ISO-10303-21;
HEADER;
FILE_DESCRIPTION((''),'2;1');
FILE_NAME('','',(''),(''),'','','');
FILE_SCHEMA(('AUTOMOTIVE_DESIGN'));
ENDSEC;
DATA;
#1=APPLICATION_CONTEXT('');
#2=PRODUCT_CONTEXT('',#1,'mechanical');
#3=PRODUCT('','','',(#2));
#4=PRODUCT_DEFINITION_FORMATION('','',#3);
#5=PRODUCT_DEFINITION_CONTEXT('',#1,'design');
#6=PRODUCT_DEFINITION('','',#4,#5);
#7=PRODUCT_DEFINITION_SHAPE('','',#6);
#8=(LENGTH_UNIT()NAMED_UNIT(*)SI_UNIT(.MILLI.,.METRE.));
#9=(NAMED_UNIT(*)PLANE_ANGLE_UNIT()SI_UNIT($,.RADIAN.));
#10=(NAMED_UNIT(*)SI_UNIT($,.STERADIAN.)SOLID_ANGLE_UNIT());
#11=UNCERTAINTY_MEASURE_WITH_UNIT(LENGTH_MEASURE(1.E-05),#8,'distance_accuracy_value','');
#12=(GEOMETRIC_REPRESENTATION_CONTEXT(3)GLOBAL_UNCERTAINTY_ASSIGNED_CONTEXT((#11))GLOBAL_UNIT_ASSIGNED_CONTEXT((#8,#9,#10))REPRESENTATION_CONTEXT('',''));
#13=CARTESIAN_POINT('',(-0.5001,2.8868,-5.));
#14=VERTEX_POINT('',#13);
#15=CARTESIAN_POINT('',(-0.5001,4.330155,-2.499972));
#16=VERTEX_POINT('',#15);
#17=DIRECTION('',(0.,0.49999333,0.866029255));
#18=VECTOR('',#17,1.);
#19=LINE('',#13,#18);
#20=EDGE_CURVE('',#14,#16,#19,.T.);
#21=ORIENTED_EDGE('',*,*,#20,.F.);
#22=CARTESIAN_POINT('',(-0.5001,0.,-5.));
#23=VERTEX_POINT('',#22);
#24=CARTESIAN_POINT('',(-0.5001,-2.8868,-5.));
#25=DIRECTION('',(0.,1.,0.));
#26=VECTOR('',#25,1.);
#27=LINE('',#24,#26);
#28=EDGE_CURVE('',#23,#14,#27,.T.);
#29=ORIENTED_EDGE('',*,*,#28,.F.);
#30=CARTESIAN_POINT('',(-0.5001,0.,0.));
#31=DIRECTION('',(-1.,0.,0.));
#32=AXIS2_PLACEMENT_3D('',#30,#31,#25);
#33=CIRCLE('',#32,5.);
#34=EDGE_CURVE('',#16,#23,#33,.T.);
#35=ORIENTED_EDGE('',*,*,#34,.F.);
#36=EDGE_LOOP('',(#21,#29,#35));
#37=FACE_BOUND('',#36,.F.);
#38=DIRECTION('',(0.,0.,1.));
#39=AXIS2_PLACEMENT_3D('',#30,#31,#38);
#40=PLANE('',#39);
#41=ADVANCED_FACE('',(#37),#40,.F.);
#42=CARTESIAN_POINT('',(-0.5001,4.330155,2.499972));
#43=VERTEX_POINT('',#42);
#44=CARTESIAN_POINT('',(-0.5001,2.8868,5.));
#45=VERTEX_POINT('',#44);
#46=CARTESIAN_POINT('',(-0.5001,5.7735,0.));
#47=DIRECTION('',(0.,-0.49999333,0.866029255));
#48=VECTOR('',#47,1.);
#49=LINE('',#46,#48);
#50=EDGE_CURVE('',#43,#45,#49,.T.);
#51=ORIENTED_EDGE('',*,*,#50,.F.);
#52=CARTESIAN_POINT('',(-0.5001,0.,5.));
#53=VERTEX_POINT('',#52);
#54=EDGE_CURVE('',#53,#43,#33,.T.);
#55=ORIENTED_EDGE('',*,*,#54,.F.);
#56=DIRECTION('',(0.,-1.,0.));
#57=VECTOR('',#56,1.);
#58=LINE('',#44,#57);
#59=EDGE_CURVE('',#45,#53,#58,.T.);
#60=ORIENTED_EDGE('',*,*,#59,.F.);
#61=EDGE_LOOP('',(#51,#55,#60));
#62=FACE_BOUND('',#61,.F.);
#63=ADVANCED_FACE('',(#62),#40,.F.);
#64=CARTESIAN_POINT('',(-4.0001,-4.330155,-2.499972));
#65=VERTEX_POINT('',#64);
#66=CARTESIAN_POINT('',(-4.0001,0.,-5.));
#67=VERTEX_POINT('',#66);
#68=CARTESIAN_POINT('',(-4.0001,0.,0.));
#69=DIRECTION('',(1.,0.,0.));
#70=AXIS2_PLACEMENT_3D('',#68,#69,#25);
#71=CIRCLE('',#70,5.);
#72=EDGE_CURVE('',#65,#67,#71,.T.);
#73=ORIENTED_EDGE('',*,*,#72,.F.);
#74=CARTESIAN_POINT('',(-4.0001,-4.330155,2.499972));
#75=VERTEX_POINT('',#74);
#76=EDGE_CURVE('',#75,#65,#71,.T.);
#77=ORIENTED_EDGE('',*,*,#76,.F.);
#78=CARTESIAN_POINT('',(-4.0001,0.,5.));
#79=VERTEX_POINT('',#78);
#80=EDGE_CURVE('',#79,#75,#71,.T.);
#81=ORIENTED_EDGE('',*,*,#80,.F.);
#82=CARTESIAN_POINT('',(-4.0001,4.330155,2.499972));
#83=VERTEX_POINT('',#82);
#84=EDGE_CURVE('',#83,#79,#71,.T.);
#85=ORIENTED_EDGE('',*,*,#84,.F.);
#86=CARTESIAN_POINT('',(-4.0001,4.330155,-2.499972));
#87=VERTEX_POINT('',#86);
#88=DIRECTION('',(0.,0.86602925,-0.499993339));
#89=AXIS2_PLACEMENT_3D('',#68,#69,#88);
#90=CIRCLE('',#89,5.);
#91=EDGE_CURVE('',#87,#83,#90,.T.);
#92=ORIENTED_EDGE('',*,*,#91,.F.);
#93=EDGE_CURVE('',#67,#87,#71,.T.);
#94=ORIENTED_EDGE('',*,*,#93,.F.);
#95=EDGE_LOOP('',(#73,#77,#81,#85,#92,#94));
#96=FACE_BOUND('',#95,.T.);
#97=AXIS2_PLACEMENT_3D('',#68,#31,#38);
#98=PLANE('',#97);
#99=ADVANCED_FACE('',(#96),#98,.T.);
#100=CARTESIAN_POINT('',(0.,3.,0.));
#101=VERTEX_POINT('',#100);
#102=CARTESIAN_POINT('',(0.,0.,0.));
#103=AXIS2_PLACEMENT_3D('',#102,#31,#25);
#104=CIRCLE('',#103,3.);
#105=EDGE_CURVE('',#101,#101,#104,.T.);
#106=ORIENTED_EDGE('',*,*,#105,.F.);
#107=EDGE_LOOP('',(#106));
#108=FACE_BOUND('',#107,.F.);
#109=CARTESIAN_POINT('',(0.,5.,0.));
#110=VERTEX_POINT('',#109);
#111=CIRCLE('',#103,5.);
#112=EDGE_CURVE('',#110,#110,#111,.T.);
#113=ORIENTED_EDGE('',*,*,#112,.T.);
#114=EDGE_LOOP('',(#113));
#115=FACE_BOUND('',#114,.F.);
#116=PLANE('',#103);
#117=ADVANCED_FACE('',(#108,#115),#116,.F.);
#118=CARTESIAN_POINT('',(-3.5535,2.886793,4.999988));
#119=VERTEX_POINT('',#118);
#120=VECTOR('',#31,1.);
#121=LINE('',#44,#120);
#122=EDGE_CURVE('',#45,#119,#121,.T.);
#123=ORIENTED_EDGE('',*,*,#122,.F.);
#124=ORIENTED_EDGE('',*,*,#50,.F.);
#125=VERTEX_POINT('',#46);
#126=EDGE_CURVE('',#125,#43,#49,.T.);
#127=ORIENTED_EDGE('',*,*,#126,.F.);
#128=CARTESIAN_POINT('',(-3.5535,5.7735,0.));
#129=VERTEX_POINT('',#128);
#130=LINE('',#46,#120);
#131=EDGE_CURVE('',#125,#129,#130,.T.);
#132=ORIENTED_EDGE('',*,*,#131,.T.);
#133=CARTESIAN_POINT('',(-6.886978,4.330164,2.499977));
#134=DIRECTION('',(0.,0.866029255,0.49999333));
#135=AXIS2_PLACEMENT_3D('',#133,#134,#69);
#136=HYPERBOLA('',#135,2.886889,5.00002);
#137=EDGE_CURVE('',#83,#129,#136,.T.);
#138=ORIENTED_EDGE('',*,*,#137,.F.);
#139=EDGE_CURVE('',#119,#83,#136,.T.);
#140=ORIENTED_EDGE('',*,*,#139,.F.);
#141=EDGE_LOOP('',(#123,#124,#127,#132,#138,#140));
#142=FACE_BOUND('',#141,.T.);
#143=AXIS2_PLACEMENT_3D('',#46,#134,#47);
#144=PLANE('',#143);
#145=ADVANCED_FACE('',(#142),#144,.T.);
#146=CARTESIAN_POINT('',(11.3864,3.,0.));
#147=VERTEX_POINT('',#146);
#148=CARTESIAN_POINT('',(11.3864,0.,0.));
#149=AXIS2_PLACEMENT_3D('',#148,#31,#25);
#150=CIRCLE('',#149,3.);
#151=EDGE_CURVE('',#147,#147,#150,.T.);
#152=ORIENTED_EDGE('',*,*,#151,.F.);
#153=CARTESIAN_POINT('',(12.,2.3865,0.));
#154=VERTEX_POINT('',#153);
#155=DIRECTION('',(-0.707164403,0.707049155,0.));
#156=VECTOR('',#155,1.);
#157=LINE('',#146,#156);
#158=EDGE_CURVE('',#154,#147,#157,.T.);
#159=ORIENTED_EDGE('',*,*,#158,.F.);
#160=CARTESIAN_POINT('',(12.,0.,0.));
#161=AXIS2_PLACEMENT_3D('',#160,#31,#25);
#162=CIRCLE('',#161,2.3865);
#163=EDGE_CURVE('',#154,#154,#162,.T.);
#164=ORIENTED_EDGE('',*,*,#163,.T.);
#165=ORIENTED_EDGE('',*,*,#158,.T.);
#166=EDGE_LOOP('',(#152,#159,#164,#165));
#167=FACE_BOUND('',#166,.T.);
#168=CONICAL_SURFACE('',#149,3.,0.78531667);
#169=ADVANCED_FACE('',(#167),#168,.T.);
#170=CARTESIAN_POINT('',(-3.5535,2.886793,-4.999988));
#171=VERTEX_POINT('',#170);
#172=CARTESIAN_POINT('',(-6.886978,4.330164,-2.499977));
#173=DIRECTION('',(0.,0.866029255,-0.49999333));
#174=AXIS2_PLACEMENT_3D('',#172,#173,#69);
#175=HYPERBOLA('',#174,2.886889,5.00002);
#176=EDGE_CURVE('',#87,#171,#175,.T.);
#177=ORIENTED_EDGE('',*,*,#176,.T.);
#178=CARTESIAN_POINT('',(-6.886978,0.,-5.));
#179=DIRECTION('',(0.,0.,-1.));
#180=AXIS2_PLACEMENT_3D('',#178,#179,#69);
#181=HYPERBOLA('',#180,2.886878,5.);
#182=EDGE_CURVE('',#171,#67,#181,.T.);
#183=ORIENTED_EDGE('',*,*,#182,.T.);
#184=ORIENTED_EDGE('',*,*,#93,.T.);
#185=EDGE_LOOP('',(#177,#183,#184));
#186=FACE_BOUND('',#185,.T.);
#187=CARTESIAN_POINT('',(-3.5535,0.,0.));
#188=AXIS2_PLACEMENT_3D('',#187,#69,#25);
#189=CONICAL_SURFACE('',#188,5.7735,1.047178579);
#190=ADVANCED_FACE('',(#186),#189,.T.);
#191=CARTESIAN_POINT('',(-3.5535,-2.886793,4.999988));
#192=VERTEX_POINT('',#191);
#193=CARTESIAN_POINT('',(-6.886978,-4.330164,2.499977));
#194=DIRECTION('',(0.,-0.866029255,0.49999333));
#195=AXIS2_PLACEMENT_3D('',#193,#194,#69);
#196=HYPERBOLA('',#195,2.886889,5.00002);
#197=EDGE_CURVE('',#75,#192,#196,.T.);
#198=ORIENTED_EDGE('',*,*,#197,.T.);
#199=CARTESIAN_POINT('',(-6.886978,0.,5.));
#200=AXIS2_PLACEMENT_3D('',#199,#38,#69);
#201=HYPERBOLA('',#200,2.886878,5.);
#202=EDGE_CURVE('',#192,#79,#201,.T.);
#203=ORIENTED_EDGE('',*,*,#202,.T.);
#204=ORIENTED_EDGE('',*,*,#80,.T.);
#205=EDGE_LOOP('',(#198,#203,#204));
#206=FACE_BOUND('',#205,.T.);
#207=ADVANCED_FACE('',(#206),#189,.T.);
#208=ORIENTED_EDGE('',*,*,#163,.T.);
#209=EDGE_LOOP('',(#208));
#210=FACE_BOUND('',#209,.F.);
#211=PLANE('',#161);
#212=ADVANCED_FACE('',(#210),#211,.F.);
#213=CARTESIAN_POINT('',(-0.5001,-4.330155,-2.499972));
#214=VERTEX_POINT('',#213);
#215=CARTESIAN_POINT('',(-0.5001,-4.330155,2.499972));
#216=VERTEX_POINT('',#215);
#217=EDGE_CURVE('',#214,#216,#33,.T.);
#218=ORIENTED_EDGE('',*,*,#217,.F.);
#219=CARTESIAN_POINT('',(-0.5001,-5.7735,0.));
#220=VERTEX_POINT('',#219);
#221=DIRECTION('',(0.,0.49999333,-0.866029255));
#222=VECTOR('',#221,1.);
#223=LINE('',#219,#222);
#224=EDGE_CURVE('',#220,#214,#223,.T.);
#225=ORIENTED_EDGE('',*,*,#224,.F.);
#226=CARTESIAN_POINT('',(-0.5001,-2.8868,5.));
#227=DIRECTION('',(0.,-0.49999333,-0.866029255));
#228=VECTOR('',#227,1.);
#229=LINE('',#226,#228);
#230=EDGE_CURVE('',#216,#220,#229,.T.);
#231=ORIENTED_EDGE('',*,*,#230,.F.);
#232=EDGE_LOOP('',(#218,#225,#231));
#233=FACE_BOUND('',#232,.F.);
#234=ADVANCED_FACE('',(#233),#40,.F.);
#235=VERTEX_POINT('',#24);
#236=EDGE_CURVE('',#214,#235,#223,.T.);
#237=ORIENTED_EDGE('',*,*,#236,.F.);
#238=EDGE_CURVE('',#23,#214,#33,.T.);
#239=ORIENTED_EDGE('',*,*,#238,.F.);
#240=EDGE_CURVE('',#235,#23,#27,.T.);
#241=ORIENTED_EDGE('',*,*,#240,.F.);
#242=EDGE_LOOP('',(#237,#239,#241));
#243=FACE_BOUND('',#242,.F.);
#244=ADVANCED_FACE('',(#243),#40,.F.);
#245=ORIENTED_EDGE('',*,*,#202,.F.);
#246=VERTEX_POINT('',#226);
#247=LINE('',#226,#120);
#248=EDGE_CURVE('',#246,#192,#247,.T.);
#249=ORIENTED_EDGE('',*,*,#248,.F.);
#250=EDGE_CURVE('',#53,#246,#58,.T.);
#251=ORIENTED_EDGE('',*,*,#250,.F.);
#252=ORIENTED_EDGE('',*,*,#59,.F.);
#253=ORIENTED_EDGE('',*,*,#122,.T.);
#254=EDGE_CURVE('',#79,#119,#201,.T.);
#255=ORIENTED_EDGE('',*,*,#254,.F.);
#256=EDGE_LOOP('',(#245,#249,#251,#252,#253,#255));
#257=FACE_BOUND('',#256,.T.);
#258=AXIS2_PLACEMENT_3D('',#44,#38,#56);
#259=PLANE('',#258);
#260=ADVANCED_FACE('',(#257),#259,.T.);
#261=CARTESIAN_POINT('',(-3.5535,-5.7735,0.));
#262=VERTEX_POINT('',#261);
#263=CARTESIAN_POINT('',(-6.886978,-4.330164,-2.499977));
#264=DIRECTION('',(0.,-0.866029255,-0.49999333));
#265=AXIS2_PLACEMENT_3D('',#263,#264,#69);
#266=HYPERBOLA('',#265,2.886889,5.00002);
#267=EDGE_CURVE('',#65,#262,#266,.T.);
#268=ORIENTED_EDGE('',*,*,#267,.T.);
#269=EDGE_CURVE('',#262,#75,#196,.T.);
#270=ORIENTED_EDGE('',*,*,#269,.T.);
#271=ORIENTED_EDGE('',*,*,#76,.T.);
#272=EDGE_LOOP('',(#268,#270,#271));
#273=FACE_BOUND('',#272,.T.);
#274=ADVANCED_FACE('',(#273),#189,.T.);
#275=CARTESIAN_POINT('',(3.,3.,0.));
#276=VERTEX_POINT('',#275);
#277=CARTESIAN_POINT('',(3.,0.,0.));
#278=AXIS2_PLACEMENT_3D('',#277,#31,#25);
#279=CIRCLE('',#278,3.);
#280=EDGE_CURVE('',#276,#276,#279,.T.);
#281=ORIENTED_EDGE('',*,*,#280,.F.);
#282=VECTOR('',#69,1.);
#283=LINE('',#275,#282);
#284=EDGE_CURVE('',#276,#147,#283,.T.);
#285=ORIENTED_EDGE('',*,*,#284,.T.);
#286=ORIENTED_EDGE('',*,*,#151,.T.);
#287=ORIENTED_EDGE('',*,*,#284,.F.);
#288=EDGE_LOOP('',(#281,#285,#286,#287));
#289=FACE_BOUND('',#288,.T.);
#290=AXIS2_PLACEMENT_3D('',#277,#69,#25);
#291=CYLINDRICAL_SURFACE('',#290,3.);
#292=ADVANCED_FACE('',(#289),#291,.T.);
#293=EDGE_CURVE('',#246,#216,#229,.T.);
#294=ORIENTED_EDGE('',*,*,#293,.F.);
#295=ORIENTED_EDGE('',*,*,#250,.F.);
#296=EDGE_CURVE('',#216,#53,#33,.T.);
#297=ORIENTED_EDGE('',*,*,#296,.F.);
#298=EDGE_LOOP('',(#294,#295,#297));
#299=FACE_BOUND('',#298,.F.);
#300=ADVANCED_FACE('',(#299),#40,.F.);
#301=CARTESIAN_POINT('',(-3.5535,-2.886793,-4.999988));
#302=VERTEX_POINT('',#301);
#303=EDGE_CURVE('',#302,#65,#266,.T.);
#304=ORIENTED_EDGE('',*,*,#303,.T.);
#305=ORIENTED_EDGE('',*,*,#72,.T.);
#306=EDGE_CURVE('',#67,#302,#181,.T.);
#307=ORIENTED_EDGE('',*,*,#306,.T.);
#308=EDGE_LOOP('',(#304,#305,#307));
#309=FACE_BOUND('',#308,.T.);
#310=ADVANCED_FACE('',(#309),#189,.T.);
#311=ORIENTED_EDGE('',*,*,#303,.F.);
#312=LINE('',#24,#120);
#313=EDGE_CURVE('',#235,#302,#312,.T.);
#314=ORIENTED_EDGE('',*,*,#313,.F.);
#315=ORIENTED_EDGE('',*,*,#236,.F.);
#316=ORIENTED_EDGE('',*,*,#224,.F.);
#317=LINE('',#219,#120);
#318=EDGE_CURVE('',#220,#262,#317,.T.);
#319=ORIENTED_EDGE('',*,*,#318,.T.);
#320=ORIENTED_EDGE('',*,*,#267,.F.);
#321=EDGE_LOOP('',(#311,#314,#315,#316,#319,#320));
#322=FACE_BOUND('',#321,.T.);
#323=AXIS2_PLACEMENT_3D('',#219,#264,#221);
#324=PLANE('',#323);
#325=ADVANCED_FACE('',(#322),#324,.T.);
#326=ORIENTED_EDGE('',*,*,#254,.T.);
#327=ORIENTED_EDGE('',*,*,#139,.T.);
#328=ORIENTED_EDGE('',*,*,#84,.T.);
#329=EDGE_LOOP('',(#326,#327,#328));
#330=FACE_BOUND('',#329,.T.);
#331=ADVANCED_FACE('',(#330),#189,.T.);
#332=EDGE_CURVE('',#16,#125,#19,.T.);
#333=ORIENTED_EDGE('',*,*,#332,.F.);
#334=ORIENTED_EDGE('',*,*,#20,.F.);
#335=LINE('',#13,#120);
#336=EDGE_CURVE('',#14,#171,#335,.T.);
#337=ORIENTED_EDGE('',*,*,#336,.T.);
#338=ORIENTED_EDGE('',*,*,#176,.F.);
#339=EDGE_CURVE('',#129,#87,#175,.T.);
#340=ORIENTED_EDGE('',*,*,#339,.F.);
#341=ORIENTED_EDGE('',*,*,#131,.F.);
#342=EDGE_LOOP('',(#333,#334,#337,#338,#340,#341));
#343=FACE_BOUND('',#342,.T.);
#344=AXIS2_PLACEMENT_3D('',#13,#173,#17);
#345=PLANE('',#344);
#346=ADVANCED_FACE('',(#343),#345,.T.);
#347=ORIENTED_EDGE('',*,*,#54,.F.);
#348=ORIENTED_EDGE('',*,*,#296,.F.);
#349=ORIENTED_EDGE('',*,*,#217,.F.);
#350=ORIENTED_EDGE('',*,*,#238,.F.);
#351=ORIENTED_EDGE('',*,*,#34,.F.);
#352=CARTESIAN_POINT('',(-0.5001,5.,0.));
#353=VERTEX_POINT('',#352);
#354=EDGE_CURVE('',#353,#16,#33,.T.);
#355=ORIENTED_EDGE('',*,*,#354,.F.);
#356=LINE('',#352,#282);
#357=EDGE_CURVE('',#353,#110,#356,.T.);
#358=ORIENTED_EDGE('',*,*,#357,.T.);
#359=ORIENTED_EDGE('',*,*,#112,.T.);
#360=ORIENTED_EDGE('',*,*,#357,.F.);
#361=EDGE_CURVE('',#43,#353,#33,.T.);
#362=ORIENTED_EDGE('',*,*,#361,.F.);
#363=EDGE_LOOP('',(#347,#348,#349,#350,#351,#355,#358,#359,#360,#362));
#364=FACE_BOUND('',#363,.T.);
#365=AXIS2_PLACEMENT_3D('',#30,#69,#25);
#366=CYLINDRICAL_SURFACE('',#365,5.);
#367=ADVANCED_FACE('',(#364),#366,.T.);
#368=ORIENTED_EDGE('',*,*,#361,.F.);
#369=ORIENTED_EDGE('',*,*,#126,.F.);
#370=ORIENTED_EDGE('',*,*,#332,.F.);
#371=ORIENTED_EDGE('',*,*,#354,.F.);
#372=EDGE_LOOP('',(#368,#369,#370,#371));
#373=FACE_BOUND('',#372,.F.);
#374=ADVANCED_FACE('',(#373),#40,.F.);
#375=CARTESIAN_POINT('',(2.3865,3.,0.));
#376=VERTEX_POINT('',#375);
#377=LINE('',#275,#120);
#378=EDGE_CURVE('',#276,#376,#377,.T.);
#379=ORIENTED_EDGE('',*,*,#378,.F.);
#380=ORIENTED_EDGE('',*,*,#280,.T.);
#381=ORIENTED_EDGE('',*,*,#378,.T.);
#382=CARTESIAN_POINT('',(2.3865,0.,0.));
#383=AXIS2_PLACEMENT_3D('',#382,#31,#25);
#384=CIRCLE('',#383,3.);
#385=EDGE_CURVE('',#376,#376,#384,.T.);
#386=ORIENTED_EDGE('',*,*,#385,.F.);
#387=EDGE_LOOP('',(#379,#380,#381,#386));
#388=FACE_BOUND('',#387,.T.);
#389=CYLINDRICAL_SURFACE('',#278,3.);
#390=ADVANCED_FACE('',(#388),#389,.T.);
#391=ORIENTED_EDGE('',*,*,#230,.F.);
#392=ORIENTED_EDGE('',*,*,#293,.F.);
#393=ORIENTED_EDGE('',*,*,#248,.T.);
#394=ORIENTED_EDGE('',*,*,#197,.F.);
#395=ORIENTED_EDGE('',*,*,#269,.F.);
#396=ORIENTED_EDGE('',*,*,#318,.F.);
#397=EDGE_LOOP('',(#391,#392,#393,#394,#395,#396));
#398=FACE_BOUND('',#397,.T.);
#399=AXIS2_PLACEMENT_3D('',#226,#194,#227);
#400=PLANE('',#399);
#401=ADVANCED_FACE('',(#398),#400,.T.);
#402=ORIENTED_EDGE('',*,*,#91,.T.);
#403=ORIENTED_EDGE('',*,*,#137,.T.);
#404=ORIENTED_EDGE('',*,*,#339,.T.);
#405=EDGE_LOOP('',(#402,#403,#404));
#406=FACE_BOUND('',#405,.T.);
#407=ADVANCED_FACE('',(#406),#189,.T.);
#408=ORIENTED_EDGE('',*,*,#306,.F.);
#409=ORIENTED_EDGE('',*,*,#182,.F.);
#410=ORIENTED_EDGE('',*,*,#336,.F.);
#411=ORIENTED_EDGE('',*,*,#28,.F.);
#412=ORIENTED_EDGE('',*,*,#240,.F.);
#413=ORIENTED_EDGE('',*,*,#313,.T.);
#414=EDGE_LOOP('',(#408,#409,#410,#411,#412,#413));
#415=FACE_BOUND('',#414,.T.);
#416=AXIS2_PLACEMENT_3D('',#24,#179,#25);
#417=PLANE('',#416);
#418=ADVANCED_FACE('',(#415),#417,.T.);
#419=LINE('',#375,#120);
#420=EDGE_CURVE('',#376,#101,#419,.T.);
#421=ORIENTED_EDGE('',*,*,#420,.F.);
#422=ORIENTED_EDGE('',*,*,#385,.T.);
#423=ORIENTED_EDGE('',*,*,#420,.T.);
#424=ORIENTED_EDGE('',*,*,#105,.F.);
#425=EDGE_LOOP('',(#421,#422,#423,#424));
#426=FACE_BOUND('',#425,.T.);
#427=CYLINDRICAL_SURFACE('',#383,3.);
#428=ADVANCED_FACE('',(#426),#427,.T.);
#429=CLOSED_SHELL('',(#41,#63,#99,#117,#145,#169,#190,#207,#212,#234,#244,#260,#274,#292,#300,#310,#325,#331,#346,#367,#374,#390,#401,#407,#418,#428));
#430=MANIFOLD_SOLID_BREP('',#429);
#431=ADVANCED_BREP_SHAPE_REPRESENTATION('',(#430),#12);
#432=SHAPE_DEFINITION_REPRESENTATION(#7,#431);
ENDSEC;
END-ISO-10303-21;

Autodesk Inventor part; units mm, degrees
ref_plane "YZ Plane" through (0, 0, 0) normal (1, 0, 0) x (0, 1, 0)
ref_plane "XZ Plane" through (0, 0, 0) normal (0, 1, 0) x (-1, 0, 0)
sketch "Sketch1" plane through (0, 0, 0) normal (0, 0, 1) x (1, 0, 0)
  line L0 (0, 5) -> (0, 3)
  line L1 (3, 3) -> (12, 3)
  line L2 (12, 3) -> (12, 0)
  line L3 (12, 0) -> (-0.5001, 0)
  line L4 (-3.0001, 0) -> (14.5, 0) projected
  line L5 (-0.5001, 0) -> (-0.5001, 5)
  line L6 (-0.5001, 5) -> (0, 5)
  line L7 (3, 3) -> (2.3865, 3)
  line L8 (2.3865, 3) -> (0, 3)
  line L9 (0, -1) -> (0, 6) projected
  dimension "d0" = 12
  dimension "d1" = 9
  dimension "d2" = 6
  dimension "d9" = 0.5001
  dimension "d10" = 10
  dimension "d13" = 0.6136
  dimension "d14" = 6
revolve "Body" add sketch "Sketch1" angle 360 about axis through (12, 0, 0) along (-1, 0, 0)
sketch "Sketch2" plane through (-0.5001, 0, 0) normal (-1, 0, 0) x (0, 0, 1)
  line L0 (0, 5.7735) -> (5, 2.8868)
  line L1 (5, 2.8868) -> (5, -2.8868)
  line L2 (5, -2.8868) -> (0, -5.7735)
  line L3 (0, -5.7735) -> (-5, -2.8868)
  line L4 (-5, -2.8868) -> (-5, 2.8868)
  line L5 (-5, 2.8868) -> (0, 5.7735)
  point P0 (0, 0)
  point P1 (0, 0)
  dimension "d11" = 10
extrude "Head" add sketch "Sketch2" along normal blind 3.5
sketch "Sketch4" plane through (0, 0, 0) normal (0, 0, 1) x (1, 0, 0)
  line L0 (-4.0001, 5) -> (-4.0001, 5.7735)
  line L1 (-4.0001, 5.7735) -> (-3.5535, 5.7735)
  line L2 (-3.5535, 5.7735) -> (-4.0001, 5)
  line L3 (-4.7001, 0) -> (0.1999, 0) projected
  line L4 (-0.5001, 5.7735) -> (-4.0001, 5.7735) projected
  line L5 (-4.0001, 2.8868) -> (-4.0001, 5.7735) projected
  dimension "d5" = 30
  dimension "d19" = 10
revolve "Chamfer1" cut sketch "Sketch4" angle 360 about axis through (-10, 0, 0) along (1, 0, 0)
thread "Thread" size "M6x1" class "6g" standard "ISO Metric profile" length 9
chamfer "Chamfer2" distance 0.6135 distance2 0.6136 1 edges at (12, -3, 0) measured on face at (12, -0.5681, 0.823)
ref_plane "Work Plane1" through (1.525, 0, 0) normal (0, 0, 1) x (1, 0, 0)
equation "\"d11\" = SW"
equation "\"d3\" = KOH - SD"
equation "\"d15\" = GEL"
equation "\"d6\" = -0.5 * SPD + 0.5 * GD"
equation "\"d0\" = NLG"
equation "\"d1\" = GEL"
equation "\"d2\" = GD"
equation "\"d10\" = SD2"
equation "\"d14\" = BDM"
equation "\"d5\" = ANG1"
equation "\"d19\" = SW0"
equation "\"NLG\" = 12"
equation "\"GD\" = NND"
equation "\"BDM\" = NND"
equation "\"KOH\" = 4"
equation "\"GEL\" = 9"
equation "\"SW\" = 10"
equation "\"SW0\" = SW"
equation "\"SPD\" = NND - 1.2269 * PTC"
equation "\"SD2\" = SW"
equation "\"SD\" = 0.5"
equation "\"ANG1\" = 30deg"
equation "\"GAL\" = 0.61345 * PTC"
equation "\"GUL\" = 0.61345 * PTC"
equation "\"RR\" = 0.25"
equation "\"WFT\" = SD"
equation "\"GD1\" = THREADDIA - 1.2269 * PTC"
equation "\"THREADDIA\" = 6"
equation "\"TOA\" = 30deg"
equation "\"FAWI\" = 45deg"
equation "\"PTC\" = 1"
equation "\"NND\" = 6"
equation "\"E0\" = 1.155 * SW"
properties part number "AS 1110 - M6 x 12" material "Steel, Mild"
